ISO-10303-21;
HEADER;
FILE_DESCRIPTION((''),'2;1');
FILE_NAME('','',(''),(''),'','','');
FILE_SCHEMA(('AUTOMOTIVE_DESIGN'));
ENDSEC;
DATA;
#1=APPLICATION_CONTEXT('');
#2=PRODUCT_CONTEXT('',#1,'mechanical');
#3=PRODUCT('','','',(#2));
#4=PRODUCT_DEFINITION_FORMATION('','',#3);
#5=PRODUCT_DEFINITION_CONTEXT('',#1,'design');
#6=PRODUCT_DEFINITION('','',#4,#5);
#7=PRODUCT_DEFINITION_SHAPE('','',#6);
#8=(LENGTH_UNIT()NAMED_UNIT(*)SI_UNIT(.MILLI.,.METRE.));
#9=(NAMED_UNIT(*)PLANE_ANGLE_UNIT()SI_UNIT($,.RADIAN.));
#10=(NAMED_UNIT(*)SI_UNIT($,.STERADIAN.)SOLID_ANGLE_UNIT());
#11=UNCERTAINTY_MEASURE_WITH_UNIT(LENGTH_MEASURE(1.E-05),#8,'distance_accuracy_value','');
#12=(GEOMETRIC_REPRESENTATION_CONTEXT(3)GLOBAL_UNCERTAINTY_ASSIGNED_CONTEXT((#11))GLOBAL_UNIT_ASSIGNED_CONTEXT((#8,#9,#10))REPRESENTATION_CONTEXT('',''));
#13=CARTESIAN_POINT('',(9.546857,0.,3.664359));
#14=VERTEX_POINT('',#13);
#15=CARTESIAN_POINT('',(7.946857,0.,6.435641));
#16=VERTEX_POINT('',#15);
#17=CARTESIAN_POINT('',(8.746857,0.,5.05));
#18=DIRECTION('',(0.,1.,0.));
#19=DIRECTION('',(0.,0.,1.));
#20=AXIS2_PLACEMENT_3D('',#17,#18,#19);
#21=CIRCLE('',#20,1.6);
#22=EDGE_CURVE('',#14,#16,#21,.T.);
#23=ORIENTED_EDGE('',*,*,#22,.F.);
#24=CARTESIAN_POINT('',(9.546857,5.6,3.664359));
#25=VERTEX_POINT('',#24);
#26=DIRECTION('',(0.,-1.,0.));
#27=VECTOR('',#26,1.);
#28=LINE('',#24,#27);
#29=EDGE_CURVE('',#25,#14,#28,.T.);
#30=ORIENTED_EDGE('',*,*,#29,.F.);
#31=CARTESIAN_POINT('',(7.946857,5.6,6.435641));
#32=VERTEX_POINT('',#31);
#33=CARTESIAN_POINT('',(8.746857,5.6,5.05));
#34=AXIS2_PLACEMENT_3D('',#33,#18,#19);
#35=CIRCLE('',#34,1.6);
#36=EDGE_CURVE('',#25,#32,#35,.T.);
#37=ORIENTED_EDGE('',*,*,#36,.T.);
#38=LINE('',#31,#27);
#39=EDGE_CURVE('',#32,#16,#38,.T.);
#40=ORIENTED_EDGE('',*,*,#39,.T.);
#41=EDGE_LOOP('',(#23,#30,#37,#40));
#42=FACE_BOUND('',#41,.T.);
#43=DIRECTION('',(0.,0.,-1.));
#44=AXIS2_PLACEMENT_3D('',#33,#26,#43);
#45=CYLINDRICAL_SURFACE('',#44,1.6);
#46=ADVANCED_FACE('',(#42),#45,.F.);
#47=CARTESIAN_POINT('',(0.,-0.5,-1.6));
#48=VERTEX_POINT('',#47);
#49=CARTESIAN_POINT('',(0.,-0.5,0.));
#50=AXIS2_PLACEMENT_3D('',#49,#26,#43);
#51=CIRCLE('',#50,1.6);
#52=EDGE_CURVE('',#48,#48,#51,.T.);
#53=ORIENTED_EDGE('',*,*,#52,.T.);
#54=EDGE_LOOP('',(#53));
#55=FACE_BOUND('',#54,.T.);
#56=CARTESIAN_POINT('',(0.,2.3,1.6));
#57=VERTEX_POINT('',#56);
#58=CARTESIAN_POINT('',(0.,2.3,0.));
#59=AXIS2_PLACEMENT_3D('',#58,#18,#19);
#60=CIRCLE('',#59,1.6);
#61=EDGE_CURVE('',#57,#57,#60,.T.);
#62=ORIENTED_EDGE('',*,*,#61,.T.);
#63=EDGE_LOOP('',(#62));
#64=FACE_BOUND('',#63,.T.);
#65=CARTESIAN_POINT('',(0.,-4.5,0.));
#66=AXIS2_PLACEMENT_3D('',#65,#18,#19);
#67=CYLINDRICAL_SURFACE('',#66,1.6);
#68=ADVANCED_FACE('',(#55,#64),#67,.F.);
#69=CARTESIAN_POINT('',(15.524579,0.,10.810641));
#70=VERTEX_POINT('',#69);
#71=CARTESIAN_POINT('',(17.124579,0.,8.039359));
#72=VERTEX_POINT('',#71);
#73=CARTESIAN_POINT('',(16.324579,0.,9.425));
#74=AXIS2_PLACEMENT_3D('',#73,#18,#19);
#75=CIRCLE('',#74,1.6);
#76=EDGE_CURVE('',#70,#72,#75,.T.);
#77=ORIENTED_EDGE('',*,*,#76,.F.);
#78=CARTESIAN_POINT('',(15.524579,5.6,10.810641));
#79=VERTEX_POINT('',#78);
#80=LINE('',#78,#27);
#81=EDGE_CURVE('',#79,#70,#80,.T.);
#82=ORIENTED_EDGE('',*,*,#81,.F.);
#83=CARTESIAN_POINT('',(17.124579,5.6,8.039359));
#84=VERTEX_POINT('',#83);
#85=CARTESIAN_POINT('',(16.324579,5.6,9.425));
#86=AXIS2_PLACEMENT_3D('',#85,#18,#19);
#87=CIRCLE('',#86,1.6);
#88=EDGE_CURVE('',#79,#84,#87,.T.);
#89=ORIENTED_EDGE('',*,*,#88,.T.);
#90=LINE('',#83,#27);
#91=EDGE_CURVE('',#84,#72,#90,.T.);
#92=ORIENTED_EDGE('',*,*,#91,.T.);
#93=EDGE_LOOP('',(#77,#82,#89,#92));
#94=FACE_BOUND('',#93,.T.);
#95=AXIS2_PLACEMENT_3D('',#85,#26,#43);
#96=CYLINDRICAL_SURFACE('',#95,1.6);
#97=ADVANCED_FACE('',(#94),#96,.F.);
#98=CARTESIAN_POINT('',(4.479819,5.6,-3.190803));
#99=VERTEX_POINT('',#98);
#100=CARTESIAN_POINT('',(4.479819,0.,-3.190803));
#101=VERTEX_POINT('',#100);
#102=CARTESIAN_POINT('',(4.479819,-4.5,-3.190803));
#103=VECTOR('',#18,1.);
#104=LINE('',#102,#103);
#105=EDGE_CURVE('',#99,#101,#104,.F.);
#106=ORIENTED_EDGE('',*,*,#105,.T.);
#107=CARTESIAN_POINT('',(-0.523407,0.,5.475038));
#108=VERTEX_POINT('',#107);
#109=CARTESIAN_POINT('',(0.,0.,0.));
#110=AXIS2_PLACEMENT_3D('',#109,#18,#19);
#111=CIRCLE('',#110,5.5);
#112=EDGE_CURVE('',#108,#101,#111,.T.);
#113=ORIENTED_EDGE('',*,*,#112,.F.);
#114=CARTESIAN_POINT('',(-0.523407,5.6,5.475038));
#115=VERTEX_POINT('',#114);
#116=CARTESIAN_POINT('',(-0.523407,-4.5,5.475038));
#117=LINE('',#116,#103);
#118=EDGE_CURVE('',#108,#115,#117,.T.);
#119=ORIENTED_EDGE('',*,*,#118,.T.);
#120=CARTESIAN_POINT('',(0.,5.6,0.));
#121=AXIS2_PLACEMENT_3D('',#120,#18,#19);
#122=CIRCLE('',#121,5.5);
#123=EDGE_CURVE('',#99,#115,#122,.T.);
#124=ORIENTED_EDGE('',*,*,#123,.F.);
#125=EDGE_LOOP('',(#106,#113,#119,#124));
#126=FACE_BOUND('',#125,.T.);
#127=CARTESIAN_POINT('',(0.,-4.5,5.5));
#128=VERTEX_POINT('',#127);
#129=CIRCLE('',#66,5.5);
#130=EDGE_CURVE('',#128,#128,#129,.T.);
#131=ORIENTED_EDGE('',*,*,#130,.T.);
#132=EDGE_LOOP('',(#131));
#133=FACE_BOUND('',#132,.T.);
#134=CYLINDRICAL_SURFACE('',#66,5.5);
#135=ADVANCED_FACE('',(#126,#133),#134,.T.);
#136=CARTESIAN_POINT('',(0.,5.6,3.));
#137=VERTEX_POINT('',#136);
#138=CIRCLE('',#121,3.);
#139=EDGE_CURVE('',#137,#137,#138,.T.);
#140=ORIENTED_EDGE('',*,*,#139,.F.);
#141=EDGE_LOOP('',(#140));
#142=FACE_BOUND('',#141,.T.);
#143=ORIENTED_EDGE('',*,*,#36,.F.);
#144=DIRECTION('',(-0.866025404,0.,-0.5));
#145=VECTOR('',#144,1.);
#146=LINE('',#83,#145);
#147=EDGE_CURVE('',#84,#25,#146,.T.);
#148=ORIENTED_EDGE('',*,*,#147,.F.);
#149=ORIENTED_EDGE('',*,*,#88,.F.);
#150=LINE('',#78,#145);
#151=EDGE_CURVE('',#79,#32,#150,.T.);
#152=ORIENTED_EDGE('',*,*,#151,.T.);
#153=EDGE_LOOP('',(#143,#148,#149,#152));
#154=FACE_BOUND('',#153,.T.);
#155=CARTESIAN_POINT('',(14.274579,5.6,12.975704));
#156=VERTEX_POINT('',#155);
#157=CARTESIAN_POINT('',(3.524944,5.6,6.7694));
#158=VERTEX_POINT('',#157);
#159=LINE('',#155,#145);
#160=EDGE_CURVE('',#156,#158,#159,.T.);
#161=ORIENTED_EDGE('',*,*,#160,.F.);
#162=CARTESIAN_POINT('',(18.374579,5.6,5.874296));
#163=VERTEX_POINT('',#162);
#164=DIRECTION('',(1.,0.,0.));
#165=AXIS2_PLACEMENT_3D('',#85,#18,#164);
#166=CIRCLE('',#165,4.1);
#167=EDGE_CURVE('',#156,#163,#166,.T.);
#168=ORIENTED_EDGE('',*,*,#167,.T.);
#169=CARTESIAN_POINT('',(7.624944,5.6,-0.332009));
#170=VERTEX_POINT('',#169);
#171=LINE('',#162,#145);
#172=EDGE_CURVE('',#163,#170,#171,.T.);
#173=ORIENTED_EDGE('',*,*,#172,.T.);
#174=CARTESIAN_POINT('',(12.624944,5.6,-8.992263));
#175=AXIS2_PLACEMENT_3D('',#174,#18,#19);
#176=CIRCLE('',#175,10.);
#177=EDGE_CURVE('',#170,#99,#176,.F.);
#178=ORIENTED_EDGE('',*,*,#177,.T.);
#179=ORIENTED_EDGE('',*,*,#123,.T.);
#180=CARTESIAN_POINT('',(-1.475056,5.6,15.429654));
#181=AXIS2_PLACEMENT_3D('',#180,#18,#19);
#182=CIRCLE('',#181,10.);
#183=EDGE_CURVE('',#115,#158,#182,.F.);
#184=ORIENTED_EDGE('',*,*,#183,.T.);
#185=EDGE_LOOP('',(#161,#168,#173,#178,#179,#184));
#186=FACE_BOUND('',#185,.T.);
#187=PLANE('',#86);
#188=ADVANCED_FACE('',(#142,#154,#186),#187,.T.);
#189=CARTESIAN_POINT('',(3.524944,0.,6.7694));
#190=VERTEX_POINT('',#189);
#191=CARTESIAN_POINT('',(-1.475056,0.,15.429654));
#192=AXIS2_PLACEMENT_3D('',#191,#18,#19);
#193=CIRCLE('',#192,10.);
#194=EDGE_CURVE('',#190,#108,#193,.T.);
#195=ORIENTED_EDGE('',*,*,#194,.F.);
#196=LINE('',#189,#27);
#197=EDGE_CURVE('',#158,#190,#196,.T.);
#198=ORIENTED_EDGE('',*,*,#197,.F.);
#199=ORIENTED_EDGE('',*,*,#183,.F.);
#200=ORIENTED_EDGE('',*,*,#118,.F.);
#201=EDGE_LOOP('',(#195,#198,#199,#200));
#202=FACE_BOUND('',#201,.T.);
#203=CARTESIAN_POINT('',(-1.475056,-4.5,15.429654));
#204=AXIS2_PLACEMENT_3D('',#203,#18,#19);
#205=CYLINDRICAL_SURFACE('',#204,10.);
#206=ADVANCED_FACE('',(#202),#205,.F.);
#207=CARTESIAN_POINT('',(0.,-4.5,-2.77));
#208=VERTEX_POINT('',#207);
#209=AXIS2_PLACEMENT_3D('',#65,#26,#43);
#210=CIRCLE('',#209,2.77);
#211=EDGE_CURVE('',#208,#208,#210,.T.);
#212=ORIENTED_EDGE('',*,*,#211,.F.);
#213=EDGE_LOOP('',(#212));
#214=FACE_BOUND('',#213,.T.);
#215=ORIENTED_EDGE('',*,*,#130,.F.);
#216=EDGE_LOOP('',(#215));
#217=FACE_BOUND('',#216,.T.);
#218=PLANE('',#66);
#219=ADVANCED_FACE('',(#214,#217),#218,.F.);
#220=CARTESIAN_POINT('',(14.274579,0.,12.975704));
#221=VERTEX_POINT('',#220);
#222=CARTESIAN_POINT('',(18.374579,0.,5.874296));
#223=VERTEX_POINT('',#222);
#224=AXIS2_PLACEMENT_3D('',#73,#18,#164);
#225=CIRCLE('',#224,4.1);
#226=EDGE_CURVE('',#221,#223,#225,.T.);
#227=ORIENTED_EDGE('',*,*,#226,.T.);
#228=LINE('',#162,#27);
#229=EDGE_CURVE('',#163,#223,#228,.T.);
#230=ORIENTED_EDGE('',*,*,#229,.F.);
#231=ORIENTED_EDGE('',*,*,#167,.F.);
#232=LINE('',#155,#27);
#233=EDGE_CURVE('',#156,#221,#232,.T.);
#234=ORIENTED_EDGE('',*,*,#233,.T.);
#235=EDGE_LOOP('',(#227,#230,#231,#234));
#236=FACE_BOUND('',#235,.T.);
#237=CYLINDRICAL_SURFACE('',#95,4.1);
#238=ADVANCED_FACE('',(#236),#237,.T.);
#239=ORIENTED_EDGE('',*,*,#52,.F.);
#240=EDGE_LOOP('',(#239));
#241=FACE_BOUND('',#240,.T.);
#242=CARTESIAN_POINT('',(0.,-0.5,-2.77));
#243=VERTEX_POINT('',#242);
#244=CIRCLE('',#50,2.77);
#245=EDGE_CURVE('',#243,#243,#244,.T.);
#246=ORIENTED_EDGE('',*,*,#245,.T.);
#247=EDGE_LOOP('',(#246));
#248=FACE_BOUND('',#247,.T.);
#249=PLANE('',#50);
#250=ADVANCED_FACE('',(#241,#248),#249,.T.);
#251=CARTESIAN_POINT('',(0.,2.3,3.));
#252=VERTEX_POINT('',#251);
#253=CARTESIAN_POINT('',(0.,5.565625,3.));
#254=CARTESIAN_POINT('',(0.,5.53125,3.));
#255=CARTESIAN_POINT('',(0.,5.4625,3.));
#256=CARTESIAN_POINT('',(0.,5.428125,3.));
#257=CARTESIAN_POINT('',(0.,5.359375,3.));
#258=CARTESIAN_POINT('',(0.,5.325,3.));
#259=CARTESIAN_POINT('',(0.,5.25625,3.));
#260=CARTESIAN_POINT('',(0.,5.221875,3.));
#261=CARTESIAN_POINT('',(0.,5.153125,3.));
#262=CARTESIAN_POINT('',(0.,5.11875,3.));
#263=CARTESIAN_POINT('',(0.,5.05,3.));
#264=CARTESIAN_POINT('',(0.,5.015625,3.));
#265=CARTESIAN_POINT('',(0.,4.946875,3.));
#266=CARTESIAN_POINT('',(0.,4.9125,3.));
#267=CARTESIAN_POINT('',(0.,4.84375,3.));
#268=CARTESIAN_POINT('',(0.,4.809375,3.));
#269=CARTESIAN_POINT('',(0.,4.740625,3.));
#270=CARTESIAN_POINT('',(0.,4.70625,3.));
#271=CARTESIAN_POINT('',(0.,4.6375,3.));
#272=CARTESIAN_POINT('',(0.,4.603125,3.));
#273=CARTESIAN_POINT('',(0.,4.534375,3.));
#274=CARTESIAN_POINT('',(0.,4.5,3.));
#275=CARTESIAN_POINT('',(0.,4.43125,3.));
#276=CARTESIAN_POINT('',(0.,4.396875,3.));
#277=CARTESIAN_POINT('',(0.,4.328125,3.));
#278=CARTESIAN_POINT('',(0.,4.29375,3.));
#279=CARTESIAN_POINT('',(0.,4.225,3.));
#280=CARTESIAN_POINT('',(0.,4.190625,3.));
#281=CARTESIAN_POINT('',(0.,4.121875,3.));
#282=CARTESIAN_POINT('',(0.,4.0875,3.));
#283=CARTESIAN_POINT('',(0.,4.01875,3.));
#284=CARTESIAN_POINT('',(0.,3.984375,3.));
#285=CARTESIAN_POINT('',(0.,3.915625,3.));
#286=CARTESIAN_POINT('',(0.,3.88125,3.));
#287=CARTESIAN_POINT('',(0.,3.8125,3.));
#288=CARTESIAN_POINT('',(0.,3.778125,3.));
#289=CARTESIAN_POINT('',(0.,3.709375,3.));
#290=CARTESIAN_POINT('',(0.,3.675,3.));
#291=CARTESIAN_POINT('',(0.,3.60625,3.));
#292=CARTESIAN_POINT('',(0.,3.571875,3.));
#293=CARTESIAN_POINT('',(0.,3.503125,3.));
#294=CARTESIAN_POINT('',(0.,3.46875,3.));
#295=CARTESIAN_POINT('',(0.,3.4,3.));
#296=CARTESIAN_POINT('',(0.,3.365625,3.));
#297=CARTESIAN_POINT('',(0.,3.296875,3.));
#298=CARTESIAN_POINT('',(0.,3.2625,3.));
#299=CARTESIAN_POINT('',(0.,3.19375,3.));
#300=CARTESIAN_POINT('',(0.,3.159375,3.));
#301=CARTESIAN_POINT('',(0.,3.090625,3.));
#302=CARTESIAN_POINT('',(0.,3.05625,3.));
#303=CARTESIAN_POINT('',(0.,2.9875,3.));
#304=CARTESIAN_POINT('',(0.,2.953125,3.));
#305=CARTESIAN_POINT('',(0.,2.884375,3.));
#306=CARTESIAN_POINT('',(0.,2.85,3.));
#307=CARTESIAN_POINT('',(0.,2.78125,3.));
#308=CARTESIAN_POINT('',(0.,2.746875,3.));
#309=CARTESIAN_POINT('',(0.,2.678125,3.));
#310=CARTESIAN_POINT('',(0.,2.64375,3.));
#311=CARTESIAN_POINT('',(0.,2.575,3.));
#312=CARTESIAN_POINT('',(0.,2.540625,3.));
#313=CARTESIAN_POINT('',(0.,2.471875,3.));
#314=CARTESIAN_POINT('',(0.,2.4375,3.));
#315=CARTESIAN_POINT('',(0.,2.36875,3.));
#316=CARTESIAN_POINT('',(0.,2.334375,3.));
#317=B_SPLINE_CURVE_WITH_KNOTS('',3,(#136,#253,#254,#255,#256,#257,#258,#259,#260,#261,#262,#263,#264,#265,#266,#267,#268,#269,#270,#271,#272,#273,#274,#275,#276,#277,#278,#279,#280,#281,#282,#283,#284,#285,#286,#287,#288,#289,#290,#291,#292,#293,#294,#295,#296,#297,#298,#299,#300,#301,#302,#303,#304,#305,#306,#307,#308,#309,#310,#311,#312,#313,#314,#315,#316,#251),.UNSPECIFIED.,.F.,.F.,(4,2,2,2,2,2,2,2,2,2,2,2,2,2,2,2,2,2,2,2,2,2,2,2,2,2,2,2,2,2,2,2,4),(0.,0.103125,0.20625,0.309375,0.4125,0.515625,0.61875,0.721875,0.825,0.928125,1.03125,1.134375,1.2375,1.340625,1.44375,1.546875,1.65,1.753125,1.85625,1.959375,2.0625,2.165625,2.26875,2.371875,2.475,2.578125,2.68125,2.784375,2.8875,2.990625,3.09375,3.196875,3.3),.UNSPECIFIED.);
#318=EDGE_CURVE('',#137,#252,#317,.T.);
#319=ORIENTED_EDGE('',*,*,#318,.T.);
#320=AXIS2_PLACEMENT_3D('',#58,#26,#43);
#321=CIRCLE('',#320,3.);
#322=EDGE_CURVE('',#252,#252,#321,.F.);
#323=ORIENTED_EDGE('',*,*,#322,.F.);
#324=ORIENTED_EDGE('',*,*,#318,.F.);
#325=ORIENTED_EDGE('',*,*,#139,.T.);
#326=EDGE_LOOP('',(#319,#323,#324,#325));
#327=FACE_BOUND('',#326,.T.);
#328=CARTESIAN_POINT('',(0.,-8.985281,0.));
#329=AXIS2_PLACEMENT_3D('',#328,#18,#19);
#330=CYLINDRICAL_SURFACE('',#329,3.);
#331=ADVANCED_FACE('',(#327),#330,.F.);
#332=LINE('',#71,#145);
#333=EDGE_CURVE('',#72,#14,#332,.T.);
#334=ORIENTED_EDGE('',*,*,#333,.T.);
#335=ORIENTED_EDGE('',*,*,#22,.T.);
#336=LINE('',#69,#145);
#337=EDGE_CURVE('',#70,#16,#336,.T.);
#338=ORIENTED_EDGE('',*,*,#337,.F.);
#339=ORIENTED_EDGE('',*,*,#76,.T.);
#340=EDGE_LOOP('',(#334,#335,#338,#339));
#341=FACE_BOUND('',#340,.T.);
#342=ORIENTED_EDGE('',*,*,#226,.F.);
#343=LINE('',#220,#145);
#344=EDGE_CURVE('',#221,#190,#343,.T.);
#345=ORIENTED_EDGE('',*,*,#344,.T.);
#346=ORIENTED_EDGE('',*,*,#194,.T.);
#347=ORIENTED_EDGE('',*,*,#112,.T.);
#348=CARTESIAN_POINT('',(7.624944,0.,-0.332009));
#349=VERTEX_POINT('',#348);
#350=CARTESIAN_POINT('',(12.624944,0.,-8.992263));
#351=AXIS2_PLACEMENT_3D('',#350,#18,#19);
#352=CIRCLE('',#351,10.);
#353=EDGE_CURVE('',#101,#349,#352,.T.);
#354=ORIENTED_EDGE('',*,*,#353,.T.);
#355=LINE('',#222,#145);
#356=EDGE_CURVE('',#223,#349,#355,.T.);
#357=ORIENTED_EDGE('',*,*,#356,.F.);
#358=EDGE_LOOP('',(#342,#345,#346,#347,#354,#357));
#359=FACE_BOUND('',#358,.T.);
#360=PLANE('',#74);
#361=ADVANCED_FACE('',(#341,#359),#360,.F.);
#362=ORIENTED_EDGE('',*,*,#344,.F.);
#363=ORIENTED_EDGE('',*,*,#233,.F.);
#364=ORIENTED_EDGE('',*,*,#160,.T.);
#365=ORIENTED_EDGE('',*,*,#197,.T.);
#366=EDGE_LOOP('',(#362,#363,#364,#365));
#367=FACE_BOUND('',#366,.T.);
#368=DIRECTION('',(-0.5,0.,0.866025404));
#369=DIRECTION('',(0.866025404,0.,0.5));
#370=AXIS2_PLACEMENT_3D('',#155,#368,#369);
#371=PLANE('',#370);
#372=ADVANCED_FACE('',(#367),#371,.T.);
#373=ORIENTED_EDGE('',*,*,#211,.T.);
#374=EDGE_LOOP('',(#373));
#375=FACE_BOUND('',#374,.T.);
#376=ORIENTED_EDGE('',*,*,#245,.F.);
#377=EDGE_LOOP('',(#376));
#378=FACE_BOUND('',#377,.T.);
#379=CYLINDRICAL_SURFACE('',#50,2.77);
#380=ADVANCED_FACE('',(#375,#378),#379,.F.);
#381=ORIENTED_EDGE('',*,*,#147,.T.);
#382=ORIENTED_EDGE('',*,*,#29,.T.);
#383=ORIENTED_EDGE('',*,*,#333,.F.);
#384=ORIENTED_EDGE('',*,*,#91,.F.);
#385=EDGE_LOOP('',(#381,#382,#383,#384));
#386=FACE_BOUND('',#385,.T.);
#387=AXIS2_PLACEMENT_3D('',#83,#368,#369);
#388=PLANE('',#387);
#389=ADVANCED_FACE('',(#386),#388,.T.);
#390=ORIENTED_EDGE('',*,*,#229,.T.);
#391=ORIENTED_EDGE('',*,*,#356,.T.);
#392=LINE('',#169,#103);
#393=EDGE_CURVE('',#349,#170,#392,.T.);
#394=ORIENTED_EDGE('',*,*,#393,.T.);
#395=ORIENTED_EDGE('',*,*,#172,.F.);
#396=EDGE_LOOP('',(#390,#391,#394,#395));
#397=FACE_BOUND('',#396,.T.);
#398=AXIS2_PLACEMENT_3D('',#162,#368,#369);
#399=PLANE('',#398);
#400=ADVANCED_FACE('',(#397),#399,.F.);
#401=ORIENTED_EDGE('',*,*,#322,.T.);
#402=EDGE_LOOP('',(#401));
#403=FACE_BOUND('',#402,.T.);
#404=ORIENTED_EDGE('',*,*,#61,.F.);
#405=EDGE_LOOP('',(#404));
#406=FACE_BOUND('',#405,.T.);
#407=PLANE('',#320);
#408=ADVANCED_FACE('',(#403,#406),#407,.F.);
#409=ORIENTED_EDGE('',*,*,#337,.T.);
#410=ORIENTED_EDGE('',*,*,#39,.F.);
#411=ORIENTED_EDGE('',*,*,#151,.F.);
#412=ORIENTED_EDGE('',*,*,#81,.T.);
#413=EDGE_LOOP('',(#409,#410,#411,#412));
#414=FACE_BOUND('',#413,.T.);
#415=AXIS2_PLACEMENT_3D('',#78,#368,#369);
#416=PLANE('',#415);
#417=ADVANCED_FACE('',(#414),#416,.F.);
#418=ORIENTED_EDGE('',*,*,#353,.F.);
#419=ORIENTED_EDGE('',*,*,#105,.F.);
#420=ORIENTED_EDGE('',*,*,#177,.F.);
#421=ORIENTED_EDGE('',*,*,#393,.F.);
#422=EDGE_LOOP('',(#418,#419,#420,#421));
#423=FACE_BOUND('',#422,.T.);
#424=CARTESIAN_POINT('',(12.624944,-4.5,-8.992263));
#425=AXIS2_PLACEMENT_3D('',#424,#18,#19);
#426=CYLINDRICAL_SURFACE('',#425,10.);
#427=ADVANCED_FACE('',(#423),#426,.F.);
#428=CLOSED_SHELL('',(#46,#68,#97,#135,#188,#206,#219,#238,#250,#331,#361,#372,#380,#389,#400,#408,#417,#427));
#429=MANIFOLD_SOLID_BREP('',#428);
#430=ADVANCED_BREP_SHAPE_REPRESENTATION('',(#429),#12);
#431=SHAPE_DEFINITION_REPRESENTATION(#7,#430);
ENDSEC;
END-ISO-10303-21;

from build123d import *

# Parameters (mm, degrees)
EXTRUDE_THIN2_DEPTH      = 5.6
BOSS_EXTRUDE1_DEPTH      = 5.6
BOSS_EXTRUDE2_DEPTH      = 5.6
BOSS_EXTRUDE2_DEPTH_BACK = 4.5
SKETCH6_R                = 5.5
FILLET1_R                = 10
SKETCH7_R                = 2.77
CUT_EXTRUDE3_DEPTH       = 4
SKETCH9_R                = 3
CUT_EXTRUDE5_DEPTH       = 3.3
SKETCH10_R               = 1.6
CUT_EXTRUDE6_DEPTH       = 26.423002314


with BuildPart() as part:
    # Sketch4 → Extrude-Thin2 (new body)
    with BuildSketch(Plane(origin=(0, 0, 0), x_dir=(1, 0, 0), z_dir=(0, 1, 0))):
        with BuildLine():
            Line((10.796856578, -1.499295844), (18.374578861, -5.874295844))
            ThreePointArc((18.374578861, -5.874295844), (19.875283017, -11.475), (14.274578861, -12.975704156))
            Line((14.274578861, -12.975704156), (6.696856578, -8.600704156))
            ThreePointArc((6.696856578, -8.600704156), (5.196152423, -3), (10.796856578, -1.499295844))
        make_face()
        with BuildLine():
            Line((9.546856578, -3.664359354), (17.124578861, -8.039359354))
            ThreePointArc((17.124578861, -8.039359354), (17.710219507, -10.225), (15.524578861, -10.810640646))
            Line((15.524578861, -10.810640646), (7.946856578, -6.435640646))
            ThreePointArc((7.946856578, -6.435640646), (7.361215932, -4.25), (9.546856578, -3.664359354))
        make_face(mode=Mode.SUBTRACT)
    extrude(amount=EXTRUDE_THIN2_DEPTH)

    # Sketch5 → Boss-Extrude1 (add)
    with BuildSketch(Plane(origin=(0, 0, 0), x_dir=(1, 0, 0), z_dir=(0, 1, 0))):
        with BuildLine():
            Line((10.796856578, -1.499295844), (2.05, 3.550704156))
            ThreePointArc((2.05, 3.550704156), (-3.550704156, 2.05), (-2.05, -3.550704156))
            Line((-2.05, -3.550704156), (6.696856578, -8.600704156))
            ThreePointArc((6.696856578, -8.600704156), (8.998238507, -9.142286296), (11.216030786, -8.323099255))
            Line((11.216030786, -8.323099255), (7.946856578, -6.435640646))
            ThreePointArc((7.946856578, -6.435640646), (7.361215932, -4.25), (9.546856578, -3.664359354))
            Line((9.546856578, -3.664359354), (12.816030786, -5.551817963))
            ThreePointArc((12.816030786, -5.551817963), (12.416571434, -3.221559989), (10.796856578, -1.499295844))
        make_face()
    extrude(amount=BOSS_EXTRUDE1_DEPTH)

    # Sketch6 → Boss-Extrude2 (add, two sides: drawn at the far end of the back side and taken through both)
    with BuildSketch(Plane(origin=(0, 0, 0), x_dir=(1, 0, 0), z_dir=(0, 1, 0)).offset(-BOSS_EXTRUDE2_DEPTH_BACK)):
        with Locations(Location((0, 0, 0), (0, 0, 270))):
            Circle(SKETCH6_R)
    extrude(amount=BOSS_EXTRUDE2_DEPTH + BOSS_EXTRUDE2_DEPTH_BACK)

    # Fillet1
    # the kernel refuses this fillet: 10 mm, written as the material it adds along each edge
    with BuildSketch(Plane(origin=(1.124901573, 5.6, 5.383734433), x_dir=(0.8660254037844402, 0, 0.4999999999999975), z_dir=(0, -1, 0))) as fillet1_piece_1:
        with BuildLine():
            CenterArc((2.77133022, 10), FILLET1_R, 245.460811273, 24.539188727)
            ThreePointArc((-1.381825119, 0.903225806), (-0.65683145, 0.503752837), (0, 0))
            Line((0, 0), (2.77133022, 0))
        make_face()
    extrude(amount=5.6)
    with BuildSketch(Plane(origin=(5.224901573, 5.6, -1.717673878), x_dir=(0.8660254037844397, 0, 0.49999999999999806), z_dir=(0, -1, 0))) as fillet1_piece_2:
        with BuildLine():
            CenterArc((2.77133022, -10), FILLET1_R, 90, 24.539188727)
            ThreePointArc((-1.381825119, -0.903225806), (-0.65683145, -0.503752837), (0, 0))
            Line((0, 0), (2.77133022, 0))
        make_face()
    extrude(amount=5.6)

    # Sketch7 → Cut-Extrude3 (cut)
    with BuildSketch(Plane.XZ.offset(4.5)):
        with Locations(Location((0, 0, 0), (0, 0, 270))):
            Circle(SKETCH7_R)
    extrude(amount=-CUT_EXTRUDE3_DEPTH, mode=Mode.SUBTRACT)

    # Sketch9 → Cut-Extrude5 (cut)
    with BuildSketch(Plane(origin=(0, 5.6, 0), x_dir=(1, 0, 0), z_dir=(0, 1, 0))):
        with Locations(Location((0, 0, 0), (0, 0, 270))):
            Circle(SKETCH9_R)
    extrude(amount=-CUT_EXTRUDE5_DEPTH, mode=Mode.SUBTRACT)

    # Sketch10 → Cut-Extrude6 (cut, through all)
    with BuildSketch(Plane(origin=(0, 2.3, 0), x_dir=(1, 0, 0), z_dir=(0, 1, 0))):
        with Locations(Location((0, 0, 0), (0, 0, 270))):
            Circle(SKETCH10_R)
    extrude(amount=-CUT_EXTRUDE6_DEPTH, mode=Mode.SUBTRACT)


solid = part.part
